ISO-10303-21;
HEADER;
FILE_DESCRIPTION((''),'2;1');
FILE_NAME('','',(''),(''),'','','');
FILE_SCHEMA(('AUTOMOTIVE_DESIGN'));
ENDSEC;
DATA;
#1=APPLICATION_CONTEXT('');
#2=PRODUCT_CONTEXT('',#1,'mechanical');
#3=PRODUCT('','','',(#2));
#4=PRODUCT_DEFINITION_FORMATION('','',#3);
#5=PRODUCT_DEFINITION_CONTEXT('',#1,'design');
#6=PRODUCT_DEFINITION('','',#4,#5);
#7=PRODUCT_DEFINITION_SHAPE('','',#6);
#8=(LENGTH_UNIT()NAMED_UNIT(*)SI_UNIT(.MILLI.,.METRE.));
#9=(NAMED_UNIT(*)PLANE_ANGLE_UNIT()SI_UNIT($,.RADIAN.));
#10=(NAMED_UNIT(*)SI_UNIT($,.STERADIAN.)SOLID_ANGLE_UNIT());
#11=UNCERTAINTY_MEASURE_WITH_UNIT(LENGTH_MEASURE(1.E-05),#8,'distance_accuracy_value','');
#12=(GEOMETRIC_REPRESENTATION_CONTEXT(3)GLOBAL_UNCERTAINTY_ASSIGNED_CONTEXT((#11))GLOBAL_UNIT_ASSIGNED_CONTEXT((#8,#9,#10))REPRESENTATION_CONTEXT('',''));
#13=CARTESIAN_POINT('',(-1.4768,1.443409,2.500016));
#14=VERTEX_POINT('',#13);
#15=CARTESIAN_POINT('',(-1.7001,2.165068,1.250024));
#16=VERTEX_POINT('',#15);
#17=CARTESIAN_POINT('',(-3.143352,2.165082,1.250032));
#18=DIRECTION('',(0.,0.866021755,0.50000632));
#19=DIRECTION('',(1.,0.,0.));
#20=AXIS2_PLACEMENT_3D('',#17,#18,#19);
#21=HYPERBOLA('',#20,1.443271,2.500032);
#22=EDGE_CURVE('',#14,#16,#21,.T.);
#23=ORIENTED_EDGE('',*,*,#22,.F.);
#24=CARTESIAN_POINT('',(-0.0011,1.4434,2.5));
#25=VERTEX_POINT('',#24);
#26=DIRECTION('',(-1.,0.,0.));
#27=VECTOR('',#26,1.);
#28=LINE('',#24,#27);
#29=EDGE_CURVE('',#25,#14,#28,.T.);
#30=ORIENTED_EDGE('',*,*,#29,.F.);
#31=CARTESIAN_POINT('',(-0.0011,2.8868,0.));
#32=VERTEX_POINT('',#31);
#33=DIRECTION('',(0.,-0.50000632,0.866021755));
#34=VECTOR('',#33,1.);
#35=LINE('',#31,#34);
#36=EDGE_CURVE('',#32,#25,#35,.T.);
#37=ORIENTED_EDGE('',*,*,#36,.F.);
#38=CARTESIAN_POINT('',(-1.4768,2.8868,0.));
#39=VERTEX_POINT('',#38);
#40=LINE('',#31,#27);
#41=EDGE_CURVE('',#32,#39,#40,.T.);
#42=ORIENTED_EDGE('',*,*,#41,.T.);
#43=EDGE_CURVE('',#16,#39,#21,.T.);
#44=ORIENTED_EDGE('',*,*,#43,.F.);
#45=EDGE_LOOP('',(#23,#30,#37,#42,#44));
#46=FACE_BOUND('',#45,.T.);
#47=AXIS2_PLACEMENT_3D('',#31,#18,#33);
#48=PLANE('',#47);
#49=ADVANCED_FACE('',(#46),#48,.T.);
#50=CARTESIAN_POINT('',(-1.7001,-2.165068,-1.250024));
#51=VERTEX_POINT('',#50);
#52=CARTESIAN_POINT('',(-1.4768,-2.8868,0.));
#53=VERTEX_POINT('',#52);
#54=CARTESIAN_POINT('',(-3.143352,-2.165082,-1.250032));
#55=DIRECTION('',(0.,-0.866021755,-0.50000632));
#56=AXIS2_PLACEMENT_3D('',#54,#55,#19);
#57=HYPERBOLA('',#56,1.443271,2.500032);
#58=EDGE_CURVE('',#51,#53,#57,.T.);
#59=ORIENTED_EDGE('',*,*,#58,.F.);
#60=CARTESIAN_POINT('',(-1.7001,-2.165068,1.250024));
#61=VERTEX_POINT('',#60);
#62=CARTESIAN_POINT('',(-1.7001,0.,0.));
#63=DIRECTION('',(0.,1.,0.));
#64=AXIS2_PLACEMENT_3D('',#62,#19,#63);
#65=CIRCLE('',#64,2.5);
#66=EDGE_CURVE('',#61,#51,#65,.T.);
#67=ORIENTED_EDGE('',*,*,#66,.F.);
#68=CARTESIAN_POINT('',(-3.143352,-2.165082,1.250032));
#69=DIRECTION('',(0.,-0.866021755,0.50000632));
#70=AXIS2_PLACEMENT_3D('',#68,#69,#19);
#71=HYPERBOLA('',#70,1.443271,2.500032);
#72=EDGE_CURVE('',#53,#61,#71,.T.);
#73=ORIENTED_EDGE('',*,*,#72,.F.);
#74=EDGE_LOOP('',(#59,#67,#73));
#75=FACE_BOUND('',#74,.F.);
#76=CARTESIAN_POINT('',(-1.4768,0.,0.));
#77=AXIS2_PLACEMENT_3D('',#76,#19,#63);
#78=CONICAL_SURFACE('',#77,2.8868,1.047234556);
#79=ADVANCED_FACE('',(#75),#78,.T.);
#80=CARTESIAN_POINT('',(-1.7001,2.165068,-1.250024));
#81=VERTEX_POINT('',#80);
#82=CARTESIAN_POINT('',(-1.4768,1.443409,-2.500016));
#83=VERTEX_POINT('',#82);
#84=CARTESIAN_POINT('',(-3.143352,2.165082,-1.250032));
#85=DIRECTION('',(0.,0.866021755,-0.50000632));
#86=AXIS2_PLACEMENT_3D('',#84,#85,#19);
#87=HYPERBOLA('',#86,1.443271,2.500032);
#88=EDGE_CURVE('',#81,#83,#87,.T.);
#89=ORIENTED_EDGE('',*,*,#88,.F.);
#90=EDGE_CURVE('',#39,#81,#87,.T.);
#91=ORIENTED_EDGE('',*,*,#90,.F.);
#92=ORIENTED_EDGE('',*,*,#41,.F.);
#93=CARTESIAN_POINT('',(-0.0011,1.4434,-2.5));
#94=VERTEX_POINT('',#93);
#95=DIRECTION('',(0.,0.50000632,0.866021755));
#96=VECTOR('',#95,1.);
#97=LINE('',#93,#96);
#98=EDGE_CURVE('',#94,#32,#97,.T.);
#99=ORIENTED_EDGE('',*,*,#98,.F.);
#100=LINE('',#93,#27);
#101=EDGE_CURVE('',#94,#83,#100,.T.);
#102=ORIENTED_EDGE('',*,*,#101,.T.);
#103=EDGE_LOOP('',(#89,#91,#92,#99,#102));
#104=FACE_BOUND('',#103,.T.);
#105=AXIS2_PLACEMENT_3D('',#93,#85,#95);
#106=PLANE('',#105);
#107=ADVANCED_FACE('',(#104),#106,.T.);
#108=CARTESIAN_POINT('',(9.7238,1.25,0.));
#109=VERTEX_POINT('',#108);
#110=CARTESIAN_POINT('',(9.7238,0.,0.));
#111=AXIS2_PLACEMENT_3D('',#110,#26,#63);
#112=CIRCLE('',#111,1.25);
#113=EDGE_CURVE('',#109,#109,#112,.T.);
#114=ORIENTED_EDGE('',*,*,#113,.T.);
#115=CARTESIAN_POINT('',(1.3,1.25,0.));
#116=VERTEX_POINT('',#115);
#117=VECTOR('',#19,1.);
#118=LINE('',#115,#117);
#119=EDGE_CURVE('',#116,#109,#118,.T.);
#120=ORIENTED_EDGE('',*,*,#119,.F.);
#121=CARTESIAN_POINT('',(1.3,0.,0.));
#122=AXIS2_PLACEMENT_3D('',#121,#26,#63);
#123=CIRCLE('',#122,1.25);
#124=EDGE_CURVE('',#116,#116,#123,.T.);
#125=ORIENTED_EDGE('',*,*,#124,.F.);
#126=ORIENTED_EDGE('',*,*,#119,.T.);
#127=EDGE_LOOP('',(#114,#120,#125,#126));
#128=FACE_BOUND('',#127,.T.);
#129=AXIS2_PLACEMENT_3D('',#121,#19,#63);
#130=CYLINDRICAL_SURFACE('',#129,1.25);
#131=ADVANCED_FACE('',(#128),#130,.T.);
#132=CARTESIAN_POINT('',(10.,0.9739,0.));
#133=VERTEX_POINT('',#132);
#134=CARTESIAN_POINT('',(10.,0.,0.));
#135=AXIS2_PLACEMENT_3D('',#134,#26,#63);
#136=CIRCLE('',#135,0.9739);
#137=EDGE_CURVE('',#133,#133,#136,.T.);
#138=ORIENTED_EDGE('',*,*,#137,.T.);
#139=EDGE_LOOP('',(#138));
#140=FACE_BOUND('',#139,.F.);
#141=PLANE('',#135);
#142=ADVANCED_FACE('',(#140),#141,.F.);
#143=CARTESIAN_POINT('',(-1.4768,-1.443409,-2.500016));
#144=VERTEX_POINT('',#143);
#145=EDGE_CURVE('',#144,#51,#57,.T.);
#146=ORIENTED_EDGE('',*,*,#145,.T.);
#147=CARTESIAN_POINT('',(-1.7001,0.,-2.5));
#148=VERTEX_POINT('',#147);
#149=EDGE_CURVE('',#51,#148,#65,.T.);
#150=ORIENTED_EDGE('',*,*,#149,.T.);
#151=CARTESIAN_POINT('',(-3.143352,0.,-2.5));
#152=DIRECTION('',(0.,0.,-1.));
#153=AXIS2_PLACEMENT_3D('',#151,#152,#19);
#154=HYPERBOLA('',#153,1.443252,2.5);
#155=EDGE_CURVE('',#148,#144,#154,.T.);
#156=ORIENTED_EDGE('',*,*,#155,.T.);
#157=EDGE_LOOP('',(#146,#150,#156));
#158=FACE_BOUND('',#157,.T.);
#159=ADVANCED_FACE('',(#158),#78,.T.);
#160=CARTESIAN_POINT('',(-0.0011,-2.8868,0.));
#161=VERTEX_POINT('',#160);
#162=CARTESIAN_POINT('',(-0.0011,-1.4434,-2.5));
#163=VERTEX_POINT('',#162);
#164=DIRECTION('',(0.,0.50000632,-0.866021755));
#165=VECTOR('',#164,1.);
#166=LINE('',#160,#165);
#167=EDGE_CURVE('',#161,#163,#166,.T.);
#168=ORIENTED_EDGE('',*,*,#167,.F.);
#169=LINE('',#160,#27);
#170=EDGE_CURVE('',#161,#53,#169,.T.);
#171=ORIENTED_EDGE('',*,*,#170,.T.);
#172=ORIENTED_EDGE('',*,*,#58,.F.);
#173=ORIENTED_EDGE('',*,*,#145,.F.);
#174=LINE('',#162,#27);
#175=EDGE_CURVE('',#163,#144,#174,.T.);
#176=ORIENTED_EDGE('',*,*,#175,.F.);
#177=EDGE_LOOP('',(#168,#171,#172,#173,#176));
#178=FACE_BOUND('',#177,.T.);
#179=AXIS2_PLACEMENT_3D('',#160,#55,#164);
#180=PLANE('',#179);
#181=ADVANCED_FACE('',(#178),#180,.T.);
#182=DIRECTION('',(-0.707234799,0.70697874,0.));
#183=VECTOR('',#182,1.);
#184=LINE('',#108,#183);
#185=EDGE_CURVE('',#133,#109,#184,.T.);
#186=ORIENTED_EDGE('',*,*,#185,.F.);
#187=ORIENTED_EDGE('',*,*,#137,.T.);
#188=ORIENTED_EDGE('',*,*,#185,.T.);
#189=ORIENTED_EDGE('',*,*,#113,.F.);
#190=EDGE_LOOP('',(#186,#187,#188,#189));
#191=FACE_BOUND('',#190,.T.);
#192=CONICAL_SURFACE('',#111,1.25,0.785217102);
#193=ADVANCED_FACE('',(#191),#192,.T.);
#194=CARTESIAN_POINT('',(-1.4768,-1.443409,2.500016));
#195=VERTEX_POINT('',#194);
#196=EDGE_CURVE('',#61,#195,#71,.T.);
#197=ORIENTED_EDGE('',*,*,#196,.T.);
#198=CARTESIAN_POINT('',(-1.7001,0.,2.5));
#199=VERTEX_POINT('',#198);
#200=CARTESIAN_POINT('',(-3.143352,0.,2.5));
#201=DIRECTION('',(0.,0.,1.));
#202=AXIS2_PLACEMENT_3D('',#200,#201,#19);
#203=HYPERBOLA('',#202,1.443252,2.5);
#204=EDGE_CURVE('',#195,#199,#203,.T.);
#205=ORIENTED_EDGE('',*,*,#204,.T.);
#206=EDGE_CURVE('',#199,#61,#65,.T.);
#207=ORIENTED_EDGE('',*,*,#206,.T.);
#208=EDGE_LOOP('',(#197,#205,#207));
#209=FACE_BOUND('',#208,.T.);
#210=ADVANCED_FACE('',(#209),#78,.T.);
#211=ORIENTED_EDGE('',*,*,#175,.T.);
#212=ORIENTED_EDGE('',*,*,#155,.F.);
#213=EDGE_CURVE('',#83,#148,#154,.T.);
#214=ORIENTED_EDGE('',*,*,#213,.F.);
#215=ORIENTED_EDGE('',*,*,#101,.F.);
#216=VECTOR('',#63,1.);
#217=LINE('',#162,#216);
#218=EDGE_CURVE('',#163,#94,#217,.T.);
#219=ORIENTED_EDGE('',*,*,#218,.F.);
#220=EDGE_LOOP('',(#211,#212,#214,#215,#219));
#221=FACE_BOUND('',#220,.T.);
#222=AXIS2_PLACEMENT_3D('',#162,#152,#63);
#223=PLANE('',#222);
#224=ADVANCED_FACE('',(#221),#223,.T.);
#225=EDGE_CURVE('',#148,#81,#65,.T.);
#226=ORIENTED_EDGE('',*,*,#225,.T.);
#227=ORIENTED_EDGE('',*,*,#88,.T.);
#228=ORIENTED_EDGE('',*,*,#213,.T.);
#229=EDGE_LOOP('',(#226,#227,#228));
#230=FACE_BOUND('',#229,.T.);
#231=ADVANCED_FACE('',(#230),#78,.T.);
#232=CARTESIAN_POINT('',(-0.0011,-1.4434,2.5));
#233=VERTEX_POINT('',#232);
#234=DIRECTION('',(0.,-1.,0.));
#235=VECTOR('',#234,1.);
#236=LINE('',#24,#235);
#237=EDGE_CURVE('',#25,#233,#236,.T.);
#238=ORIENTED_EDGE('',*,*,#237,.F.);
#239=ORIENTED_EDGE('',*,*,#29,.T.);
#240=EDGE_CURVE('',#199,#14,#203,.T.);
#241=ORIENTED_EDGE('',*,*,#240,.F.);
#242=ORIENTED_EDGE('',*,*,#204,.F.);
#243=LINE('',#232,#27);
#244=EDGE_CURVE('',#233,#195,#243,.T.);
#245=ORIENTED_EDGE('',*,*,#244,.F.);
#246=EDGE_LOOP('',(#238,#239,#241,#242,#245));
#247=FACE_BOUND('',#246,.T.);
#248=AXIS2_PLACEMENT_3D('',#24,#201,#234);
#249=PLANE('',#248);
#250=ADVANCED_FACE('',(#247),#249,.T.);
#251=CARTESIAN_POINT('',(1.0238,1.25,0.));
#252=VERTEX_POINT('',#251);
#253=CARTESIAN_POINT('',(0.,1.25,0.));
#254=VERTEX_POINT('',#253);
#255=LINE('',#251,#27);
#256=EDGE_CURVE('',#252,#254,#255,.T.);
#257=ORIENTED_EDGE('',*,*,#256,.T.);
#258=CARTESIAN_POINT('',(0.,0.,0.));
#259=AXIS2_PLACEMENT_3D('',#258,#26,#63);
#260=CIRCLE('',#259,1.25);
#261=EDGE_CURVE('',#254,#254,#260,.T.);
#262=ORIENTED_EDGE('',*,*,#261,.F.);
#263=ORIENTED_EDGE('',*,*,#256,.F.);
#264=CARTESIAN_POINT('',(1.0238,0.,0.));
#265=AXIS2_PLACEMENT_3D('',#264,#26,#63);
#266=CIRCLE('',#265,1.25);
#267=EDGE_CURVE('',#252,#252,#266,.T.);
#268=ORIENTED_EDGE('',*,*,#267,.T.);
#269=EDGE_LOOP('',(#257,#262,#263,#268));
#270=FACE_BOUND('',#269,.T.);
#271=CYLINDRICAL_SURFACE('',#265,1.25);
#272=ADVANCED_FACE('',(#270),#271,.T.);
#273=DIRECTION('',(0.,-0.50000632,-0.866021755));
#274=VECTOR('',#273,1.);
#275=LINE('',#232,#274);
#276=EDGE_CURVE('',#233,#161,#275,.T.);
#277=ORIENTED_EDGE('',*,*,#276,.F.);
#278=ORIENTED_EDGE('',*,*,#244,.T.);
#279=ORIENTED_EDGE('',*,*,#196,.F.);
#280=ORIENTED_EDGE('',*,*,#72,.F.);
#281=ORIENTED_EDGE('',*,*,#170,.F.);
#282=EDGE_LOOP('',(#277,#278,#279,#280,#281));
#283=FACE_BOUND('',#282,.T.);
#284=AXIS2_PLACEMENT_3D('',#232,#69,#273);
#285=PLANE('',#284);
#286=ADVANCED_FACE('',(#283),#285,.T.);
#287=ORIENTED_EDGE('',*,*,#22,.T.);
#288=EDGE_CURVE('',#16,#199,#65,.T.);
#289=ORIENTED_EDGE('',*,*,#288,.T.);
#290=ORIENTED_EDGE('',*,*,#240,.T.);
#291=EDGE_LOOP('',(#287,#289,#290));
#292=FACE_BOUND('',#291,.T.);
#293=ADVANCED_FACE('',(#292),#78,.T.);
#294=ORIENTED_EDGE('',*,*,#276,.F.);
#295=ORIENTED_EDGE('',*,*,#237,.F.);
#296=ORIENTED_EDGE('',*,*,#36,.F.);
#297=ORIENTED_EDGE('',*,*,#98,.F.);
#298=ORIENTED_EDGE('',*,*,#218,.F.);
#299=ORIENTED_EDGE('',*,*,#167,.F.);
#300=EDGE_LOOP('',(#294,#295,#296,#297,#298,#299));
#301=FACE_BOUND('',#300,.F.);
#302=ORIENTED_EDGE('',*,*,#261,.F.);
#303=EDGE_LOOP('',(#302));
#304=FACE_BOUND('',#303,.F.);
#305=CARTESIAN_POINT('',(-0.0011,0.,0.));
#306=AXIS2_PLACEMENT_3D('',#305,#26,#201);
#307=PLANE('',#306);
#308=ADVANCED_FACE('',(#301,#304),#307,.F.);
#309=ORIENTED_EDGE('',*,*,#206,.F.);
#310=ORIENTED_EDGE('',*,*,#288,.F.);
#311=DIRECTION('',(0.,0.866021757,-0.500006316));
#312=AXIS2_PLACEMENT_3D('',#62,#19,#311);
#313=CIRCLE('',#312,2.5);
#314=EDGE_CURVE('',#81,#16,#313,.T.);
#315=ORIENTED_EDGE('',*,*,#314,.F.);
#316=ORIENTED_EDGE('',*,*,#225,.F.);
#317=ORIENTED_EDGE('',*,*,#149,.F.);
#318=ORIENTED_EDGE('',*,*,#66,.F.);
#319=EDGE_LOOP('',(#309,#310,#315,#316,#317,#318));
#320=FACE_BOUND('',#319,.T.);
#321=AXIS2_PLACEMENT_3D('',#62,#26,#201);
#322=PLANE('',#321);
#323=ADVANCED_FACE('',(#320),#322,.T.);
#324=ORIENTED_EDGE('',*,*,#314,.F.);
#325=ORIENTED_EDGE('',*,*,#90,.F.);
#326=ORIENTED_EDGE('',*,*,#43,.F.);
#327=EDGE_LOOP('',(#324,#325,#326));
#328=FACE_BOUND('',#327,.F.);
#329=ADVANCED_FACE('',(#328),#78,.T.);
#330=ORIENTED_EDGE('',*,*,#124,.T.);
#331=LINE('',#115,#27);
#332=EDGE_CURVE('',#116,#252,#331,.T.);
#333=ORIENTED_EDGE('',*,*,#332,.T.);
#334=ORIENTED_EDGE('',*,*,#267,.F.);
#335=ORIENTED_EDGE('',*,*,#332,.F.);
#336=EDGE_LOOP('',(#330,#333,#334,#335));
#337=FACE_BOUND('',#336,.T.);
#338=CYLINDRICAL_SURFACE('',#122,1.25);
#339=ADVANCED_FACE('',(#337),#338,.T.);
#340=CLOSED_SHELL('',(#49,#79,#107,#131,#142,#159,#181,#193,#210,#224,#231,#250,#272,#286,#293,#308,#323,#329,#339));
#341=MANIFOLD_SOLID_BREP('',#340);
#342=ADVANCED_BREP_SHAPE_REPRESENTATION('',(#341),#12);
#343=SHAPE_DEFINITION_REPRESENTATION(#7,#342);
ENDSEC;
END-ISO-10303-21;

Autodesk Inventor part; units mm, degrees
ref_plane "YZ Plane" through (0, 0, 0) normal (1, 0, 0) x (0, 1, 0)
ref_plane "XZ Plane" through (0, 0, 0) normal (0, 1, 0) x (-1, 0, 0)
sketch "Sketch1" plane through (0, 0, 0) normal (0, 0, 1) x (1, 0, 0)
  line L0 (0, 2.5) -> (0, 1.25)
  line L1 (1.3, 1.25) -> (10, 1.25)
  line L2 (10, 1.25) -> (10, 0)
  line L3 (10, 0) -> (-0.0011, 0)
  line L4 (-2.0013, 0) -> (12.0002, 0) projected
  line L5 (-0.0011, 0) -> (-0.0011, 2.5)
  line L6 (-0.0011, 2.5) -> (0, 2.5)
  line L7 (1.3, 1.25) -> (1.0238, 1.25)
  line L8 (1.0238, 1.25) -> (0, 1.25)
  line L9 (0, -0.5) -> (0, 3) projected
  dimension "d0" = 10
  dimension "d1" = 8.7
  dimension "d2" = 2.5
  dimension "d9" = 0.0011
  dimension "d10" = 5
  dimension "d13" = 0.2762
  dimension "d14" = 2.5
revolve "Body" add sketch "Sketch1" angle 360 about axis through (10, 0, 0) along (-1, 0, 0)
sketch "Sketch2" plane through (-0.0011, 0, 0) normal (-1, 0, 0) x (0, 0, 1)
  line L0 (0, 2.8868) -> (2.5, 1.4434)
  line L1 (2.5, 1.4434) -> (2.5, -1.4434)
  line L2 (2.5, -1.4434) -> (0, -2.8868)
  line L3 (0, -2.8868) -> (-2.5, -1.4434)
  line L4 (-2.5, -1.4434) -> (-2.5, 1.4434)
  line L5 (-2.5, 1.4434) -> (0, 2.8868)
  point P0 (0, 0)
  point P1 (0, 0)
  dimension "d11" = 5
extrude "Head" add sketch "Sketch2" along normal blind 1.699
sketch "Sketch4" plane through (0, 0, 0) normal (0, 0, 1) x (1, 0, 0)
  line L0 (-1.7001, 2.5) -> (-1.7001, 2.8868)
  line L1 (-1.7001, 2.8868) -> (-1.4768, 2.8868)
  line L2 (-1.4768, 2.8868) -> (-1.7001, 2.5)
  line L3 (-2.0399, 0) -> (0.3387, 0) projected
  line L4 (-0.0011, 2.8868) -> (-1.7001, 2.8868) projected
  line L5 (-1.7001, 1.4434) -> (-1.7001, 2.8868) projected
  dimension "d5" = 30
  dimension "d19" = 5
revolve "Chamfer1" cut sketch "Sketch4" angle 360 about axis through (-10, 0, 0) along (1, 0, 0)
thread "Thread" size "M2.5x0.45" class "6g" standard "ISO Metric profile" length 8.7
chamfer "Chamfer2" distance 0.2761 distance2 0.2762 1 edges at (10, -1.25, 0) measured on face at (10, -0.674, 0.4136)
ref_plane "Work Plane1" through (1.525, 0, 0) normal (0, 0, 1) x (1, 0, 0)
equation "\"d0\" = NLG"
equation "\"d1\" = GEL"
equation "\"d2\" = GD"
equation "\"d10\" = SD2"
equation "\"d14\" = BDM"
equation "\"d11\" = SW"
equation "\"d3\" = KOH - SD"
equation "\"d5\" = ANG1"
equation "\"d19\" = SW0"
equation "\"d15\" = GEL"
equation "\"d6\" = -0.5 * SPD + 0.5 * GD"
equation "\"NLG\" = 10"
equation "\"GD\" = NND"
equation "\"BDM\" = NND"
equation "\"KOH\" = 1.7"
equation "\"GEL\" = 8.7"
equation "\"SW\" = 5"
equation "\"SW0\" = SW"
equation "\"SPD\" = NND - 1.2269 * PTC"
equation "\"SD2\" = SW"
equation "\"SD\" = 0.001"
equation "\"ANG1\" = 30deg"
equation "\"GAL\" = 0.61345 * PTC"
equation "\"GUL\" = 0.61345 * PTC"
equation "\"RR\" = 0.001"
equation "\"WFT\" = SD"
equation "\"GD1\" = THREADDIA - 1.2269 * PTC"
equation "\"THREADDIA\" = 2.5"
equation "\"SDH\" = SW"
equation "\"TOA\" = 30deg"
equation "\"FAWI\" = 45deg"
equation "\"PTC\" = 0.45"
equation "\"NND\" = 2.5"
equation "\"E0\" = 1.155 * SW"
properties part number "AS 1110 - M2,5 x 10" material "Steel, Mild"
